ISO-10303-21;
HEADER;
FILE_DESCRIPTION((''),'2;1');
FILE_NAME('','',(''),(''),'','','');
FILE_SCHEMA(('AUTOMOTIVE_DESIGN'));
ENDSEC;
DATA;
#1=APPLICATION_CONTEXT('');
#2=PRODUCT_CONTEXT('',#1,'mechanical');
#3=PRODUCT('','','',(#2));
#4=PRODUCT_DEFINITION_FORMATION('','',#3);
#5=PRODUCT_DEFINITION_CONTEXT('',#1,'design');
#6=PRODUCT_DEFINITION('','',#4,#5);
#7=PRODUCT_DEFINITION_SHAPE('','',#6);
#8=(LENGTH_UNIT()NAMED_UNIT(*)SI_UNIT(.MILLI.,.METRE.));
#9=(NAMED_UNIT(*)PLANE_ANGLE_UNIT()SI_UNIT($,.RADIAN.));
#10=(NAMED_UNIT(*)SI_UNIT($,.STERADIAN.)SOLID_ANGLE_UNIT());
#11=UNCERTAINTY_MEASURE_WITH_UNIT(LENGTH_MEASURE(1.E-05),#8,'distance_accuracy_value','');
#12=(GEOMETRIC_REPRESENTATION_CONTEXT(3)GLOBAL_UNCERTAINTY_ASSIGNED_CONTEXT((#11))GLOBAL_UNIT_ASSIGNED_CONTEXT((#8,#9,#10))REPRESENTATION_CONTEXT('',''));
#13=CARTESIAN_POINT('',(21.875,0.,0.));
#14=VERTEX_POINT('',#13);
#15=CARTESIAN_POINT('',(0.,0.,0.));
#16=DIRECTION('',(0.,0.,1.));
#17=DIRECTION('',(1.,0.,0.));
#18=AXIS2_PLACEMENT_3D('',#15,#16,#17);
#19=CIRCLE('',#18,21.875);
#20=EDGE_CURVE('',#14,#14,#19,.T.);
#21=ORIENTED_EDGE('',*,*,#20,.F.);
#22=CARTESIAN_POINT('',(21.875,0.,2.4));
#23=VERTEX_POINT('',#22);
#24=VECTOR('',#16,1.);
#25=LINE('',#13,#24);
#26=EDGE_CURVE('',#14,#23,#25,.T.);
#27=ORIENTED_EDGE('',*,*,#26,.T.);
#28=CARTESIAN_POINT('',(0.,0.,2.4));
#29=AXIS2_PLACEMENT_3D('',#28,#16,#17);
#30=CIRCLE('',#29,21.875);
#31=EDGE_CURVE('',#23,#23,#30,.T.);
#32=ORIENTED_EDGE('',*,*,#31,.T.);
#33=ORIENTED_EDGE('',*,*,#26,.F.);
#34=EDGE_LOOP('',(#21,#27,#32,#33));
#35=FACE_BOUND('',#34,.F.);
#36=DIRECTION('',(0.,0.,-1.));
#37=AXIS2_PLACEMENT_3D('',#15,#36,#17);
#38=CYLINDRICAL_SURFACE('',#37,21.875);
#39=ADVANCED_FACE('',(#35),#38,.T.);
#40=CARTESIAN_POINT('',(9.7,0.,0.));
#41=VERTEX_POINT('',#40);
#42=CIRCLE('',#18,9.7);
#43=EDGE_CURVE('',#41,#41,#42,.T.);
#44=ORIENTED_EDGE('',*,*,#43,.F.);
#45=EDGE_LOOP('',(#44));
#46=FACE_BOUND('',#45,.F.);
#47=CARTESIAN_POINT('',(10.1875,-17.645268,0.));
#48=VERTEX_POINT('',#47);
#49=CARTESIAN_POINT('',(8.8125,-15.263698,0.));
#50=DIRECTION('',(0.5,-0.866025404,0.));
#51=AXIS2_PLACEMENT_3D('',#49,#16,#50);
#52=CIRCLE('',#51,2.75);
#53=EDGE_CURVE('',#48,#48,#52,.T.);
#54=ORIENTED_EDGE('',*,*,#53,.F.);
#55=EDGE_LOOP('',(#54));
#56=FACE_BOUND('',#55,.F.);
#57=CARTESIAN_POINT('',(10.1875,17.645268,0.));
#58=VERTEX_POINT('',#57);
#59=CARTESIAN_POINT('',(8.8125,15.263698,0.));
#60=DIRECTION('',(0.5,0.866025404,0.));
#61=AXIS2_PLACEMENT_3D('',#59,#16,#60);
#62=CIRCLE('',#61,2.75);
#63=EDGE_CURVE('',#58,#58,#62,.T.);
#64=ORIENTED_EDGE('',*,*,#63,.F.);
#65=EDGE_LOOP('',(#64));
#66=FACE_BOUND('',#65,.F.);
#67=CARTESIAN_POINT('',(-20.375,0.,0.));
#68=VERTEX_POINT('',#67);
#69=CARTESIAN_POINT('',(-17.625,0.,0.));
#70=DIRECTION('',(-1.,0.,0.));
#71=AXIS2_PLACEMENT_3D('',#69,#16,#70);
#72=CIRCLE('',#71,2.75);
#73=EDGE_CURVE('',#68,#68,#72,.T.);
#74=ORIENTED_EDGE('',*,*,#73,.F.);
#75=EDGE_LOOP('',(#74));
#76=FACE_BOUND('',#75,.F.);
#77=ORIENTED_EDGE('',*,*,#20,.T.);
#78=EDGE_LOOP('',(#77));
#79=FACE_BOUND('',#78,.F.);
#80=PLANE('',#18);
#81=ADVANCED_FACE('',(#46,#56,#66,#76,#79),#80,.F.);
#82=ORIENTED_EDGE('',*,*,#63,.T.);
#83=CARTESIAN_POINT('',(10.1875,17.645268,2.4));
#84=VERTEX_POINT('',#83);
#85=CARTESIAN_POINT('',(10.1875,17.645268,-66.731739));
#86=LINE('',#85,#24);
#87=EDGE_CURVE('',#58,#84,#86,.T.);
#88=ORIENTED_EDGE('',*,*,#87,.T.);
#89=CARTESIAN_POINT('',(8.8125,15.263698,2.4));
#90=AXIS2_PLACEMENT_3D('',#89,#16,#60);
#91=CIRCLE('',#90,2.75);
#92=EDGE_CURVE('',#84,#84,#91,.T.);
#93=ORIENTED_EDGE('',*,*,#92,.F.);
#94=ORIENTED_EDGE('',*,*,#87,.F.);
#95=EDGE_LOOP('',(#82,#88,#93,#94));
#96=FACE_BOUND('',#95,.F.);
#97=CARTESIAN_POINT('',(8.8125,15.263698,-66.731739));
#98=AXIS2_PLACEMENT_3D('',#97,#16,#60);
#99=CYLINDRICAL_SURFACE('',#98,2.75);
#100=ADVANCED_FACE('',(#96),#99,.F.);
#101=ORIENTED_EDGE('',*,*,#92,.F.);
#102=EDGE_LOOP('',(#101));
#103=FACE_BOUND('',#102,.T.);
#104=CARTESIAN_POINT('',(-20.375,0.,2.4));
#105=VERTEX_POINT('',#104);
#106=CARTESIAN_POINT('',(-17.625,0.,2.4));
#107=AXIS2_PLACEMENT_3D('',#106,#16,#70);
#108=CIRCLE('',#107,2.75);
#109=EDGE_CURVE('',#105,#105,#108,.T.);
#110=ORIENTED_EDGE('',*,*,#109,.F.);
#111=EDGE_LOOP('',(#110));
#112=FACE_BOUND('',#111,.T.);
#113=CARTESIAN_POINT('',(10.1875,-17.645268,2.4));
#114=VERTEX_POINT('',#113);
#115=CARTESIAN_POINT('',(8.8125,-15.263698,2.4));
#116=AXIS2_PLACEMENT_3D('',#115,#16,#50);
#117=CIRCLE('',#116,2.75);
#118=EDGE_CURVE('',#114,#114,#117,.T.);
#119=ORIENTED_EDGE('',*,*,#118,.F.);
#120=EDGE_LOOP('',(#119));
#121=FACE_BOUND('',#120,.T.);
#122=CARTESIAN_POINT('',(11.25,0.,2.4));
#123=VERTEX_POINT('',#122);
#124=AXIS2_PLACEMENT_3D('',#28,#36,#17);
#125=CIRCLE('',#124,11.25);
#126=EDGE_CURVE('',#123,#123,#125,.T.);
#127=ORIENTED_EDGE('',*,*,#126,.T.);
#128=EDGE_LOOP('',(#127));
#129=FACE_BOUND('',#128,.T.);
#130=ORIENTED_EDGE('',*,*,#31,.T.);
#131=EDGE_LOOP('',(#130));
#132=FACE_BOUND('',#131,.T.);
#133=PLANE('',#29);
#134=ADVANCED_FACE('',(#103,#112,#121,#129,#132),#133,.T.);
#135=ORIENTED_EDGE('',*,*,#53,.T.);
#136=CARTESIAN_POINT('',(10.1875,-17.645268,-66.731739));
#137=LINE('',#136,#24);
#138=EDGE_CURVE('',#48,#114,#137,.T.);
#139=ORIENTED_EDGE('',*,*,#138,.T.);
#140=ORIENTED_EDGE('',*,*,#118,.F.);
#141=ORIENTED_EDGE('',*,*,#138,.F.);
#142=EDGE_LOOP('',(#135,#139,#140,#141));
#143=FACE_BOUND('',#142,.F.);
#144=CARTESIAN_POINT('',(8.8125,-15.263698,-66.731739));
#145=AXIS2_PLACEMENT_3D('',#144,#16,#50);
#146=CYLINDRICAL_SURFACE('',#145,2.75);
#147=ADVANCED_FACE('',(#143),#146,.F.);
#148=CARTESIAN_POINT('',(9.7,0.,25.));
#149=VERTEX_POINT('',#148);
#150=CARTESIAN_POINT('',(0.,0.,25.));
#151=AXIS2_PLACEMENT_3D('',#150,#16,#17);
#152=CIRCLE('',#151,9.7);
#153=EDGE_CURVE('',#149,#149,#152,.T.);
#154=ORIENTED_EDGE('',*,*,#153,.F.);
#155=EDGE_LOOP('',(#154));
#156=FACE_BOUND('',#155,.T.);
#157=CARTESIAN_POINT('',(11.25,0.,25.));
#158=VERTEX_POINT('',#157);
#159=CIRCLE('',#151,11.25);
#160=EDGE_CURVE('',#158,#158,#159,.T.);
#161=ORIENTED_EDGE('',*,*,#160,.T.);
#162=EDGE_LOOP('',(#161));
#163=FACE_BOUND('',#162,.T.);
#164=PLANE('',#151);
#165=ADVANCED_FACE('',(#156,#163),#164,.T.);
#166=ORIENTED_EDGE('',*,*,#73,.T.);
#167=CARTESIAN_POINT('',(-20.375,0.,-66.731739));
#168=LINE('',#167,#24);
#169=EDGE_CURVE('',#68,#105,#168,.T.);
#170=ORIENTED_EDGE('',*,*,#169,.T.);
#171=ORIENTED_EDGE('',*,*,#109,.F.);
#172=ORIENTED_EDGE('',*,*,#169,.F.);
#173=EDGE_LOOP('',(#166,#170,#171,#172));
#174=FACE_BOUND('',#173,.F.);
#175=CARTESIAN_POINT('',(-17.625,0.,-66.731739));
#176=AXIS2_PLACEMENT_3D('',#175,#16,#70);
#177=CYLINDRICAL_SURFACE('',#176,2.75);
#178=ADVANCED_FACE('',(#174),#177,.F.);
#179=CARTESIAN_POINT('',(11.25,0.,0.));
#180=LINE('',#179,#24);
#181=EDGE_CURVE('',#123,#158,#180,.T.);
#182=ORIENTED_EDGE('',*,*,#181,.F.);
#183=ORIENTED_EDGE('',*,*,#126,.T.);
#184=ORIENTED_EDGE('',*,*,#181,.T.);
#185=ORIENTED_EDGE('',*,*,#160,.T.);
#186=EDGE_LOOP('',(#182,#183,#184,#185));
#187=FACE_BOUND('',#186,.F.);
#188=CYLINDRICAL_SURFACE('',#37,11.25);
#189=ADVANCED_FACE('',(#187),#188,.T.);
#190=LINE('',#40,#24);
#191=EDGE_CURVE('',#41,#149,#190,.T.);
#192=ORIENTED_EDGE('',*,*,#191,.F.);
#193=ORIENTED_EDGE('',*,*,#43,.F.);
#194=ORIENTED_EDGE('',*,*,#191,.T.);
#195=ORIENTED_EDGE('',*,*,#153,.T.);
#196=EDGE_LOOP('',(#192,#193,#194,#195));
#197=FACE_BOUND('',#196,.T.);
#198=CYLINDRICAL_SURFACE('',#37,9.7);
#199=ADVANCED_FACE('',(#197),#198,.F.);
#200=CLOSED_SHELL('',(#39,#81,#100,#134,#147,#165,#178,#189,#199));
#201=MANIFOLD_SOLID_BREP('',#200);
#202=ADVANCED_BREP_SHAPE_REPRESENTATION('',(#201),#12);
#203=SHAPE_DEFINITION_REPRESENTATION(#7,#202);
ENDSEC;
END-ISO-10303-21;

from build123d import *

# Parameters (mm, degrees)
F0_R            = 21.875
F0_R_2          = 11.25
F0_R_3          = 9.7
F1_DEPTH        = 2.4
F2_DEPTH        = 25
F3_D            = 5.5
F3_COPIES_COUNT = 3


# Not quite as in the source:
# - a pattern or mirror of a feature is missing from the dataset's text; its kind, count and spacing are read off the source's solid


with BuildPart() as f1:
    # F0 (on Top) → F1 (new body)
    with BuildSketch(Plane.XY):
        Circle(F0_R)
        Circle(F0_R_2, mode=Mode.SUBTRACT)
        Circle(F0_R_2)
        Circle(F0_R_3, mode=Mode.SUBTRACT)
    extrude(amount=F1_DEPTH)

    # F0 (on Top) → F2 (join)
    with BuildSketch(Plane.XY):
        Circle(F0_R_2)
        Circle(F0_R_3, mode=Mode.SUBTRACT)
    extrude(amount=F2_DEPTH)

    # F3 (through all)
    with Locations(Plane(origin=(0, 0, 0), x_dir=(1, 0, 0), z_dir=(0, 0, -1))):
        with Locations((-17.625, 0)):
            f3 = Hole(F3_D / 2)

    # F3_copies: F3 ×3 about axis
    f3_copies_axis = Axis((0, 0, 0), (0, 0, 1))
    for i in range(1, F3_COPIES_COUNT):
        add(f3.rotate(f3_copies_axis, i * 360 / F3_COPIES_COUNT), mode=Mode.SUBTRACT)


solid = f1.part
